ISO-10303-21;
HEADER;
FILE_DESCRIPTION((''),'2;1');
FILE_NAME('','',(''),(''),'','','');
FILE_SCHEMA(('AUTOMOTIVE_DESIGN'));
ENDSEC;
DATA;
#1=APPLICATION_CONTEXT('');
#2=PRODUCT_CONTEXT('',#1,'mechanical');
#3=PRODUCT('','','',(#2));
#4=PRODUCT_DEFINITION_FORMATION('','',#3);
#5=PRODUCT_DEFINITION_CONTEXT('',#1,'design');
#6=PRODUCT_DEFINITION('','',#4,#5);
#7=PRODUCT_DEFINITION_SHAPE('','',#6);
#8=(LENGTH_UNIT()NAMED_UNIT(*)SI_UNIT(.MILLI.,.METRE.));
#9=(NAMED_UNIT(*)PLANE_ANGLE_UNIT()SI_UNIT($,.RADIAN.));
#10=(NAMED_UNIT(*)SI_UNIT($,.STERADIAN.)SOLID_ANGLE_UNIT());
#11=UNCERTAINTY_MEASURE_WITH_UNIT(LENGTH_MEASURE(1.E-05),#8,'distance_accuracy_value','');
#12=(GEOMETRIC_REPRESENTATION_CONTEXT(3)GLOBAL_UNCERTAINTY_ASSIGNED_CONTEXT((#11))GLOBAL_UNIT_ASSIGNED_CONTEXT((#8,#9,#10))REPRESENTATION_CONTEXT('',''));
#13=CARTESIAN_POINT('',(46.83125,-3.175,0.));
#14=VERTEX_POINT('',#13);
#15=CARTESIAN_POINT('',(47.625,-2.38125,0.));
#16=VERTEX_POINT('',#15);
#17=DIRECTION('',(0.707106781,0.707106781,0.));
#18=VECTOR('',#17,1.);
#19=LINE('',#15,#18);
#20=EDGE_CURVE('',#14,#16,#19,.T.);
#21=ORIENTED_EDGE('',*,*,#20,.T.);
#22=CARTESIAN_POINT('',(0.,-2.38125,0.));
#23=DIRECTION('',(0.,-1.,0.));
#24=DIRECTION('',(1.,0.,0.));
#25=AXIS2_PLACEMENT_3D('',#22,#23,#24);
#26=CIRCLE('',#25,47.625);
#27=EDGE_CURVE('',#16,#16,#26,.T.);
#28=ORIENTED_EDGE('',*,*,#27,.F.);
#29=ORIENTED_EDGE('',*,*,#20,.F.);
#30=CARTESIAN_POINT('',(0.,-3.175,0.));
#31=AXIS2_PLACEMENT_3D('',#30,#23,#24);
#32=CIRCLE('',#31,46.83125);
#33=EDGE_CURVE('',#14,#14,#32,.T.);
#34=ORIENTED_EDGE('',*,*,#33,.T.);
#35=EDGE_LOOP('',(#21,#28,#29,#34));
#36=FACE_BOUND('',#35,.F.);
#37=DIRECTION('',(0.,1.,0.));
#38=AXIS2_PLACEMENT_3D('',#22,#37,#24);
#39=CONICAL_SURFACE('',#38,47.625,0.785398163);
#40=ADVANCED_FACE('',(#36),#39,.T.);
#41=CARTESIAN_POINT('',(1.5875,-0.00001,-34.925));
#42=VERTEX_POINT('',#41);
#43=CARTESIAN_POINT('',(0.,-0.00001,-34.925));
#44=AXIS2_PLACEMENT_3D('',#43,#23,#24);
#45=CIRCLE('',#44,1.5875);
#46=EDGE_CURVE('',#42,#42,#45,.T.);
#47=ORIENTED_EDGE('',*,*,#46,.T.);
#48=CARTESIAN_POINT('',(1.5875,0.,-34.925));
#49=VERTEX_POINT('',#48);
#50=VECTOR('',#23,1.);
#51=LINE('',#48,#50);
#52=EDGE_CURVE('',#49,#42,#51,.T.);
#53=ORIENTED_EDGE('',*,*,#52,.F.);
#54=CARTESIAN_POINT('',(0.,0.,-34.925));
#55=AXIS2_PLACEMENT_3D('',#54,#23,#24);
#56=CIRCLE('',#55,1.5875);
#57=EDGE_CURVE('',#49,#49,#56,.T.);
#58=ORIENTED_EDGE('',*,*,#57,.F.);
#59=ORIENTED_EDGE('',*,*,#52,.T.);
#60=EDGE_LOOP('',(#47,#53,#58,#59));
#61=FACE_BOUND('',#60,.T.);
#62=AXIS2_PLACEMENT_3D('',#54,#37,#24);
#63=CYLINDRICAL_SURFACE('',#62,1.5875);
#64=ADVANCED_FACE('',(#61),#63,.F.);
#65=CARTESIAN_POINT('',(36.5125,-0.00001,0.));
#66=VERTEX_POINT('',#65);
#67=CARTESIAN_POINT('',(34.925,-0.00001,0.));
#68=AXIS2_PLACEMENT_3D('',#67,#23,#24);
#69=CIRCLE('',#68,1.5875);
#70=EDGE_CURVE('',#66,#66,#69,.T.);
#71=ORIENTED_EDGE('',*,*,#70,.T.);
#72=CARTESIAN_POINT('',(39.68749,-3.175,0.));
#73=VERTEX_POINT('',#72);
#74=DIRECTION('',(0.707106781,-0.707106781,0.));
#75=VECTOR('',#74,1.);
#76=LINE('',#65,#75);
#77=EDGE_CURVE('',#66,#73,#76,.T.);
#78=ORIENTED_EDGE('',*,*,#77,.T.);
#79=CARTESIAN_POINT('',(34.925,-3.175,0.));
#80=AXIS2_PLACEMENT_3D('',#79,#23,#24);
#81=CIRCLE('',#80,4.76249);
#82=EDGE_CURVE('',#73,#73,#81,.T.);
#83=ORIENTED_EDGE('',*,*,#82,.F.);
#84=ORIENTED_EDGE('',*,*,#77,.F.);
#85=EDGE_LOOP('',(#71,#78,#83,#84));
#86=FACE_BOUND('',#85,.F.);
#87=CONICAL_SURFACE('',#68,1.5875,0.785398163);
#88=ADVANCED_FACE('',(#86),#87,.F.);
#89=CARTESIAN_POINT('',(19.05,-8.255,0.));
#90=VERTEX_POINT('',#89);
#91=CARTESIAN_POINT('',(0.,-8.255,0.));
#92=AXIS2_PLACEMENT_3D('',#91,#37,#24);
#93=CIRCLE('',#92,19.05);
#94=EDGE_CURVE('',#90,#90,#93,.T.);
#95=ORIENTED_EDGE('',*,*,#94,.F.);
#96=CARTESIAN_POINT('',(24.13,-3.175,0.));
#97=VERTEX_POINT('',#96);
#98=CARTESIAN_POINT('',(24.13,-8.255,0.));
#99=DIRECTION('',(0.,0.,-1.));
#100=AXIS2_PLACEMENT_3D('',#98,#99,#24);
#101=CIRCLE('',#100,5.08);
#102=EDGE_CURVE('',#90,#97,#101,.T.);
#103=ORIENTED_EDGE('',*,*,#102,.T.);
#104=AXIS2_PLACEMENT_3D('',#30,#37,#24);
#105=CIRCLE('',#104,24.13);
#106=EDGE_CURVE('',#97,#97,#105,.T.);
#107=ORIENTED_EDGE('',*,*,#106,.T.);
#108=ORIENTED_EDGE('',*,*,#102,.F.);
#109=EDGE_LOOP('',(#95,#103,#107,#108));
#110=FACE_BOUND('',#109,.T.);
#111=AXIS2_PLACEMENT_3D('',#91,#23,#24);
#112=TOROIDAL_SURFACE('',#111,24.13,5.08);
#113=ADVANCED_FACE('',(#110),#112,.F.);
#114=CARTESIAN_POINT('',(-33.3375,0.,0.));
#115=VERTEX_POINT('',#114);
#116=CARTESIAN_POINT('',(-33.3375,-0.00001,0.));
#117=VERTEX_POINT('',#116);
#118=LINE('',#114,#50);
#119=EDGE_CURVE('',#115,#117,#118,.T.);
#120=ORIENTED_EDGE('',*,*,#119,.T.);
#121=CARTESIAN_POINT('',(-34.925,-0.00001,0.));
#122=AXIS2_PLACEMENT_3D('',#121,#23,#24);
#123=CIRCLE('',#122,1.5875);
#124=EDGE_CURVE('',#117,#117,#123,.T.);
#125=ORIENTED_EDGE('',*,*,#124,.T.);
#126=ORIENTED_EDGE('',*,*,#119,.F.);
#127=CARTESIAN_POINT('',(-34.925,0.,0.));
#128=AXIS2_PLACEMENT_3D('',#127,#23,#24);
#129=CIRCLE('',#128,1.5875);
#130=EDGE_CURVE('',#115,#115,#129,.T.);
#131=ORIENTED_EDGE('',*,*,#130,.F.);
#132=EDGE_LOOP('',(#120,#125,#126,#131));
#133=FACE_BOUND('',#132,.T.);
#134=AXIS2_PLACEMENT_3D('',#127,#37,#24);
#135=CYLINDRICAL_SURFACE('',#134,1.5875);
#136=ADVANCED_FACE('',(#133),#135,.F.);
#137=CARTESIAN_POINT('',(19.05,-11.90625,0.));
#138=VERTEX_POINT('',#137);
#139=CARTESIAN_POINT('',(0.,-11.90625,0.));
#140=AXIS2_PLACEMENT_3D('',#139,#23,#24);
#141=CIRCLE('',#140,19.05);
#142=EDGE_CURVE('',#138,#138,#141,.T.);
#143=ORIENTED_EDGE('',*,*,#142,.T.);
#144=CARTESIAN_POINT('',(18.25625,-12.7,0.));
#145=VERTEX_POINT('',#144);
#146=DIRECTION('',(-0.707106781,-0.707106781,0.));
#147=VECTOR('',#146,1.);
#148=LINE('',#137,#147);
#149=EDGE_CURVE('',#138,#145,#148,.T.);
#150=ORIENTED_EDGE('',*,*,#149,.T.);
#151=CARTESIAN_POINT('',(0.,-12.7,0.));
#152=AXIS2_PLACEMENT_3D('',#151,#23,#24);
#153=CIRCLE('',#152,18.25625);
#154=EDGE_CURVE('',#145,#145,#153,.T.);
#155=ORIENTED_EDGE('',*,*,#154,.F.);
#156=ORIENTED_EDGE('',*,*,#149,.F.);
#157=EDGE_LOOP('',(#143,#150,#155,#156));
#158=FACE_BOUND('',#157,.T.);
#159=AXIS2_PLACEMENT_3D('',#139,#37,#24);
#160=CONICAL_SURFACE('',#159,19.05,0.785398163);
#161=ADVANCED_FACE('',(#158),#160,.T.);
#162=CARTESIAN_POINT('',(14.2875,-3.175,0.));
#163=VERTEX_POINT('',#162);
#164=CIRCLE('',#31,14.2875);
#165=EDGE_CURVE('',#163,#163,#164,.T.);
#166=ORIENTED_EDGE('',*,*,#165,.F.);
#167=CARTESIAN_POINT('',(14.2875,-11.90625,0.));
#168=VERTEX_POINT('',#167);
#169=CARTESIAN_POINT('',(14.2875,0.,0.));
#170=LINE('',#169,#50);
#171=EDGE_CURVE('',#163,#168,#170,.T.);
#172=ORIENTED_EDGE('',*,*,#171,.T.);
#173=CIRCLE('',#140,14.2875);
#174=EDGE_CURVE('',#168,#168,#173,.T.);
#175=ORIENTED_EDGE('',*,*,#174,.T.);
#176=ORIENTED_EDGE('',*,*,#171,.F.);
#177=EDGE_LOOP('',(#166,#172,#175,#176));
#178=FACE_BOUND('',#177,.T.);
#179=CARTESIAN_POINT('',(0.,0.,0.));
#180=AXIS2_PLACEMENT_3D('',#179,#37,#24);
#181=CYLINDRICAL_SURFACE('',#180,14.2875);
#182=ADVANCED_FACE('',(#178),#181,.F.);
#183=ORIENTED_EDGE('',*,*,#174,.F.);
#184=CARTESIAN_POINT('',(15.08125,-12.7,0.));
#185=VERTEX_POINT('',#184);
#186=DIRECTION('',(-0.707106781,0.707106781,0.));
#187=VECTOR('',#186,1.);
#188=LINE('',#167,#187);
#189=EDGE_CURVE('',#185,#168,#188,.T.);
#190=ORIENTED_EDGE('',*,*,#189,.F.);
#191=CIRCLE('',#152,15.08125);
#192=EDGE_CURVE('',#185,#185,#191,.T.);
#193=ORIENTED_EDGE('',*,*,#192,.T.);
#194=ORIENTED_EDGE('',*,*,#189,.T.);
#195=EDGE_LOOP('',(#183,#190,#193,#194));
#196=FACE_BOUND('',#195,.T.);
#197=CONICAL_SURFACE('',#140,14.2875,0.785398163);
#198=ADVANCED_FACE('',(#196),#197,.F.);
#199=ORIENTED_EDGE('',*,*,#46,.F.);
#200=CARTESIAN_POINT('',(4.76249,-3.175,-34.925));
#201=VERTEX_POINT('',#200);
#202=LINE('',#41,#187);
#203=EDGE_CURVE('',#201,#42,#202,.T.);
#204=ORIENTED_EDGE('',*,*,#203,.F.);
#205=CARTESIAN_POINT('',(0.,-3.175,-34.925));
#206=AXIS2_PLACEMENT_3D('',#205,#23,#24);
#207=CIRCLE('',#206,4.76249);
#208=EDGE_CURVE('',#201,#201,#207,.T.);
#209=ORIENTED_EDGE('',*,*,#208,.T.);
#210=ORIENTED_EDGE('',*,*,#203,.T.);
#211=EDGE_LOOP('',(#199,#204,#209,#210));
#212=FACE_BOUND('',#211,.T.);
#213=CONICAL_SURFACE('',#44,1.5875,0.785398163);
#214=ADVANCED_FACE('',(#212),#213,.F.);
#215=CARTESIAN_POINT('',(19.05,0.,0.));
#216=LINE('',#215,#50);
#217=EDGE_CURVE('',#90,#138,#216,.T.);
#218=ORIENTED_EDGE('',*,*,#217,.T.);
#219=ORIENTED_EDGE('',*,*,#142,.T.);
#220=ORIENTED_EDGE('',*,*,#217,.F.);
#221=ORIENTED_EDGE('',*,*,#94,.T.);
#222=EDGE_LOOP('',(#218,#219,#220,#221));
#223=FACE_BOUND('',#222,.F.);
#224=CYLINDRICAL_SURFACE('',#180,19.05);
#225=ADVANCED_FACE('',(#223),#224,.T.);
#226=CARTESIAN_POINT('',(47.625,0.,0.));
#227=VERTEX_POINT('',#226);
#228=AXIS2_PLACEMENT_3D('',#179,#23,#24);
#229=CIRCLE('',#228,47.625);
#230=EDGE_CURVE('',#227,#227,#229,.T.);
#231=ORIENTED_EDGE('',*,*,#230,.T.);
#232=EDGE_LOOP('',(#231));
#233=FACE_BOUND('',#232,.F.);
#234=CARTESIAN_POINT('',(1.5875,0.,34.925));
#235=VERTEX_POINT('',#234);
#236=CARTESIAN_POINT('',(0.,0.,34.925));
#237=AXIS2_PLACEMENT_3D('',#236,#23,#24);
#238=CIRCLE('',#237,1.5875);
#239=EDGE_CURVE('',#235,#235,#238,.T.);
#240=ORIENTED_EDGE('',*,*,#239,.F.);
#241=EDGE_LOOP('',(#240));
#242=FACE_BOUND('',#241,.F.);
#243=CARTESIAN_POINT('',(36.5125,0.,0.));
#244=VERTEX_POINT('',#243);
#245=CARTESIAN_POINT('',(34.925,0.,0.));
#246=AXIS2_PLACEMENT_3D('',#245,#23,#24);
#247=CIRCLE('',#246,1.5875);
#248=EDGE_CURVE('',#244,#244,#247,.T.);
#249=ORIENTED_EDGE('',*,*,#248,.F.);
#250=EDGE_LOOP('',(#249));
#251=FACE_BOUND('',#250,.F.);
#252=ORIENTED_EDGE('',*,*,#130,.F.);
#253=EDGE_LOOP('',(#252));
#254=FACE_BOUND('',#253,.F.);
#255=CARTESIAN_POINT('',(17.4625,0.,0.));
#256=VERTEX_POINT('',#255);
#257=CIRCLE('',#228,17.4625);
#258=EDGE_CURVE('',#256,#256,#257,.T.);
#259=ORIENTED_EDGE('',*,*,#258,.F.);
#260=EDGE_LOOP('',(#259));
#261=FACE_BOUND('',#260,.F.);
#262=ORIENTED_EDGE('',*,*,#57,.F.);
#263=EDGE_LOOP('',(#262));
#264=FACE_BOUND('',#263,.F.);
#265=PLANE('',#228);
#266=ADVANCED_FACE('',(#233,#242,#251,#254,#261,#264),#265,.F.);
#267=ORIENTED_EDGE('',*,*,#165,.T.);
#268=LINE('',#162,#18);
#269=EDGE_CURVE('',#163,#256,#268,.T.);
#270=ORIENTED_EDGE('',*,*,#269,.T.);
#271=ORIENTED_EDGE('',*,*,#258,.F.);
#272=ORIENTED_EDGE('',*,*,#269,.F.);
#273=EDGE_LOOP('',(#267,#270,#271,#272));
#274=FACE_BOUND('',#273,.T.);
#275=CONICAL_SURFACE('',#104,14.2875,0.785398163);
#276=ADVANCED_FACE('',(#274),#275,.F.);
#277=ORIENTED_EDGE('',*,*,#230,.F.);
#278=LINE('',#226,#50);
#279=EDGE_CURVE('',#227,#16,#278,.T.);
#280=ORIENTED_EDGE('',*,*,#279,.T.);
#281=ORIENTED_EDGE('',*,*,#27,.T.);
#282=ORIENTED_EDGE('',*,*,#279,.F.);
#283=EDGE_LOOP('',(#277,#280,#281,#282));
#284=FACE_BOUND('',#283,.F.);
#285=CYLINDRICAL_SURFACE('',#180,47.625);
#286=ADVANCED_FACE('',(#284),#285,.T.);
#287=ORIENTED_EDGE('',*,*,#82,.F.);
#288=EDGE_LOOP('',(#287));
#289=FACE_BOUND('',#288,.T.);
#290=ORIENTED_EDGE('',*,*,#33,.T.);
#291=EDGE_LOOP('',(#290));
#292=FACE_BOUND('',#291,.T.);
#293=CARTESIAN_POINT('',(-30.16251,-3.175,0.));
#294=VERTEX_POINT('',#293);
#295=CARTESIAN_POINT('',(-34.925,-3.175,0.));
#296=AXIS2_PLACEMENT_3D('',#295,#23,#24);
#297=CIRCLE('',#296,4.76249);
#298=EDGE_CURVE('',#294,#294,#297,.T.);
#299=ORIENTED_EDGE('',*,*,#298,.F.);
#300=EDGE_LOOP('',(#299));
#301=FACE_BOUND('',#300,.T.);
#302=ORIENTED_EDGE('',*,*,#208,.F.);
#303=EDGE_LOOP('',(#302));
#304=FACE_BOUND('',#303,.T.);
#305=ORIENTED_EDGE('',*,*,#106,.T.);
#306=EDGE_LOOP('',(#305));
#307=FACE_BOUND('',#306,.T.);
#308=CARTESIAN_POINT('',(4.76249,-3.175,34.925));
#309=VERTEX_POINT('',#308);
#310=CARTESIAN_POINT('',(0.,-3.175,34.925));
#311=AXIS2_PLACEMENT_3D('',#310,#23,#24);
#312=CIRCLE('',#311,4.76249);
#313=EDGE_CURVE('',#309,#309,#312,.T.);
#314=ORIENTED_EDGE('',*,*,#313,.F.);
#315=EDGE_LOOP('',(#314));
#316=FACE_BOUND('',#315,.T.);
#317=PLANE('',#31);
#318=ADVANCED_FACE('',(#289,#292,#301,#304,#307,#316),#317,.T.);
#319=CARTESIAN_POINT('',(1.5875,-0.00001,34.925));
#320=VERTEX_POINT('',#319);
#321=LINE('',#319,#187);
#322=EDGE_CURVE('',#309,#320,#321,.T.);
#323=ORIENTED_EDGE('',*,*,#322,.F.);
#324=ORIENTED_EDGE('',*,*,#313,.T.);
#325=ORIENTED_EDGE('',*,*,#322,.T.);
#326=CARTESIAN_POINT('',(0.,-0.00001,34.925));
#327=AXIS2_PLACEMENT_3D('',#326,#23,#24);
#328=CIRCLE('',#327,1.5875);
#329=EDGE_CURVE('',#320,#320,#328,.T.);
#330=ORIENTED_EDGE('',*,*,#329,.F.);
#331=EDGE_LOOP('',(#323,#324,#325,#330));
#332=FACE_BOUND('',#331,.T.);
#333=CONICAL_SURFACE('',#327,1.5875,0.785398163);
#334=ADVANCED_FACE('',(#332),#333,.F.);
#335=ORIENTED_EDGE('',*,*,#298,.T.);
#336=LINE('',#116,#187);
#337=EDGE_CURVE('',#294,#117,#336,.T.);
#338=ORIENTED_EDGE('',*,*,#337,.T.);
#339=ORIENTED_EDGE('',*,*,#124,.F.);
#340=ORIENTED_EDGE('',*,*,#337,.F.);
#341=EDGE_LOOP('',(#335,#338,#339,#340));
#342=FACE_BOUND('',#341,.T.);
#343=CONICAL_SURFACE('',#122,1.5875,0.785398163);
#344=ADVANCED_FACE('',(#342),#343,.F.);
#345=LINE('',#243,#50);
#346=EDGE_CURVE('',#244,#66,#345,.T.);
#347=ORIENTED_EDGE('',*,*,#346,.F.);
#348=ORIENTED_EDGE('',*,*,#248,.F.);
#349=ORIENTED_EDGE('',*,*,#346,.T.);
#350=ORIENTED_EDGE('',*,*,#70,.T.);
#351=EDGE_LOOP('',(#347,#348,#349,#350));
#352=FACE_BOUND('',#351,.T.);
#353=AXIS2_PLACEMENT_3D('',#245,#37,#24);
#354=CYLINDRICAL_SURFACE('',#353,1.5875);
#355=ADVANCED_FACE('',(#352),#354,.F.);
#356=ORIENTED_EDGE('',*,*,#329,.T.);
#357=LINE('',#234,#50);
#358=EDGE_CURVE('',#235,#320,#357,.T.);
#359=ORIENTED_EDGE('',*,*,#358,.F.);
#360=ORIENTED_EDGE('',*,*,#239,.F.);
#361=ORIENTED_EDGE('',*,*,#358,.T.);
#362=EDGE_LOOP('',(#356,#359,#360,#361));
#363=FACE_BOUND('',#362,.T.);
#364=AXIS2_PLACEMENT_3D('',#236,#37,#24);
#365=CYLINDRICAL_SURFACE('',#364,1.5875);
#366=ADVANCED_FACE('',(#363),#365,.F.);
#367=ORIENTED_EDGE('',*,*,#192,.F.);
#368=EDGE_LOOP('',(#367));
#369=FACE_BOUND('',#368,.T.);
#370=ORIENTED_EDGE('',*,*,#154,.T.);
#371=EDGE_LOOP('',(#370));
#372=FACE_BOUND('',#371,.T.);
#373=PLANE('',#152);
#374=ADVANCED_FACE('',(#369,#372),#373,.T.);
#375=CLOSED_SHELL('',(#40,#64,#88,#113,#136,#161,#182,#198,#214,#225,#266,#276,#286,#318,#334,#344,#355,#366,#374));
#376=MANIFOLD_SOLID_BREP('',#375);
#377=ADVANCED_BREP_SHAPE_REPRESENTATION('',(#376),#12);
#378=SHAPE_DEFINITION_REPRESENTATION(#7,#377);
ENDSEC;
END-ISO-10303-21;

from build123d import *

# Parameters (mm, degrees)
F0_R     = 47.625
F0_R_2   = 1.5875
F0_R_3   = 19.05
F0_R_4   = 14.2875
F1_DEPTH = 3.175
F2_DEPTH = 12.7
F3_SIZE  = 3.17499
F4_SIZE  = 0.79375
F5_SIZE  = 0.79375
F6_R     = 5.08
F7_SIZE  = 3.175


# Not quite as in the source:
# - a fillet or chamfer is up to 0.001 mm smaller than in the source, because OpenCascade refuses the exact size


with BuildPart() as f1:
    # F0 (on Front) → F1 (new body)
    with BuildSketch(Plane.XZ):
        Circle(F0_R)
        with Locations((0, -34.925)):
            Circle(F0_R_2, mode=Mode.SUBTRACT)
        with Locations((-34.925, 0)):
            Circle(F0_R_2, mode=Mode.SUBTRACT)
        Circle(F0_R_3, mode=Mode.SUBTRACT)
        with Locations((34.925, 0)):
            Circle(F0_R_2, mode=Mode.SUBTRACT)
        with Locations((0, 34.925)):
            Circle(F0_R_2, mode=Mode.SUBTRACT)
        Circle(F0_R_3)
        Circle(F0_R_4, mode=Mode.SUBTRACT)
    extrude(amount=F1_DEPTH)

    # F0 (on Front) → F2 (join)
    with BuildSketch(Plane.XZ):
        Circle(F0_R_3)
        Circle(F0_R_4, mode=Mode.SUBTRACT)
    extrude(amount=F2_DEPTH)

    # F3 (size 3.175 in the source; OpenCascade refuses exactly that, so slightly less here)
    f3_edges = [f1.edges().sort_by_distance(p)[0] for p in [
        (-1.5875, -3.175, 34.925),
        (-36.5125, -3.175, 0),
        (33.3375, -3.175, 0),
        (-1.5875, -3.175, -34.925),
    ]]
    chamfer(f3_edges, length=F3_SIZE)

    # F4
    f4_edges = [f1.edges().sort_by_distance(p)[0] for p in [
        (-47.625, -3.175, 0),
    ]]
    chamfer(f4_edges, length=F4_SIZE)

    # F5
    f5_edges = [f1.edges().sort_by_distance(p)[0] for p in [
        (-19.05, -12.7, 0),
        (-14.2875, -12.7, 0),
    ]]
    chamfer(f5_edges, length=F5_SIZE)

    # F6
    f6_edges = [f1.edges().sort_by_distance(p)[0] for p in [
        (-19.05, -3.175, 0),
    ]]
    fillet(f6_edges, radius=F6_R)

    # F7
    f7_edges = [f1.edges().sort_by_distance(p)[0] for p in [
        (-14.2875, 0, 0),
    ]]
    chamfer(f7_edges, length=F7_SIZE)


solid = f1.part
